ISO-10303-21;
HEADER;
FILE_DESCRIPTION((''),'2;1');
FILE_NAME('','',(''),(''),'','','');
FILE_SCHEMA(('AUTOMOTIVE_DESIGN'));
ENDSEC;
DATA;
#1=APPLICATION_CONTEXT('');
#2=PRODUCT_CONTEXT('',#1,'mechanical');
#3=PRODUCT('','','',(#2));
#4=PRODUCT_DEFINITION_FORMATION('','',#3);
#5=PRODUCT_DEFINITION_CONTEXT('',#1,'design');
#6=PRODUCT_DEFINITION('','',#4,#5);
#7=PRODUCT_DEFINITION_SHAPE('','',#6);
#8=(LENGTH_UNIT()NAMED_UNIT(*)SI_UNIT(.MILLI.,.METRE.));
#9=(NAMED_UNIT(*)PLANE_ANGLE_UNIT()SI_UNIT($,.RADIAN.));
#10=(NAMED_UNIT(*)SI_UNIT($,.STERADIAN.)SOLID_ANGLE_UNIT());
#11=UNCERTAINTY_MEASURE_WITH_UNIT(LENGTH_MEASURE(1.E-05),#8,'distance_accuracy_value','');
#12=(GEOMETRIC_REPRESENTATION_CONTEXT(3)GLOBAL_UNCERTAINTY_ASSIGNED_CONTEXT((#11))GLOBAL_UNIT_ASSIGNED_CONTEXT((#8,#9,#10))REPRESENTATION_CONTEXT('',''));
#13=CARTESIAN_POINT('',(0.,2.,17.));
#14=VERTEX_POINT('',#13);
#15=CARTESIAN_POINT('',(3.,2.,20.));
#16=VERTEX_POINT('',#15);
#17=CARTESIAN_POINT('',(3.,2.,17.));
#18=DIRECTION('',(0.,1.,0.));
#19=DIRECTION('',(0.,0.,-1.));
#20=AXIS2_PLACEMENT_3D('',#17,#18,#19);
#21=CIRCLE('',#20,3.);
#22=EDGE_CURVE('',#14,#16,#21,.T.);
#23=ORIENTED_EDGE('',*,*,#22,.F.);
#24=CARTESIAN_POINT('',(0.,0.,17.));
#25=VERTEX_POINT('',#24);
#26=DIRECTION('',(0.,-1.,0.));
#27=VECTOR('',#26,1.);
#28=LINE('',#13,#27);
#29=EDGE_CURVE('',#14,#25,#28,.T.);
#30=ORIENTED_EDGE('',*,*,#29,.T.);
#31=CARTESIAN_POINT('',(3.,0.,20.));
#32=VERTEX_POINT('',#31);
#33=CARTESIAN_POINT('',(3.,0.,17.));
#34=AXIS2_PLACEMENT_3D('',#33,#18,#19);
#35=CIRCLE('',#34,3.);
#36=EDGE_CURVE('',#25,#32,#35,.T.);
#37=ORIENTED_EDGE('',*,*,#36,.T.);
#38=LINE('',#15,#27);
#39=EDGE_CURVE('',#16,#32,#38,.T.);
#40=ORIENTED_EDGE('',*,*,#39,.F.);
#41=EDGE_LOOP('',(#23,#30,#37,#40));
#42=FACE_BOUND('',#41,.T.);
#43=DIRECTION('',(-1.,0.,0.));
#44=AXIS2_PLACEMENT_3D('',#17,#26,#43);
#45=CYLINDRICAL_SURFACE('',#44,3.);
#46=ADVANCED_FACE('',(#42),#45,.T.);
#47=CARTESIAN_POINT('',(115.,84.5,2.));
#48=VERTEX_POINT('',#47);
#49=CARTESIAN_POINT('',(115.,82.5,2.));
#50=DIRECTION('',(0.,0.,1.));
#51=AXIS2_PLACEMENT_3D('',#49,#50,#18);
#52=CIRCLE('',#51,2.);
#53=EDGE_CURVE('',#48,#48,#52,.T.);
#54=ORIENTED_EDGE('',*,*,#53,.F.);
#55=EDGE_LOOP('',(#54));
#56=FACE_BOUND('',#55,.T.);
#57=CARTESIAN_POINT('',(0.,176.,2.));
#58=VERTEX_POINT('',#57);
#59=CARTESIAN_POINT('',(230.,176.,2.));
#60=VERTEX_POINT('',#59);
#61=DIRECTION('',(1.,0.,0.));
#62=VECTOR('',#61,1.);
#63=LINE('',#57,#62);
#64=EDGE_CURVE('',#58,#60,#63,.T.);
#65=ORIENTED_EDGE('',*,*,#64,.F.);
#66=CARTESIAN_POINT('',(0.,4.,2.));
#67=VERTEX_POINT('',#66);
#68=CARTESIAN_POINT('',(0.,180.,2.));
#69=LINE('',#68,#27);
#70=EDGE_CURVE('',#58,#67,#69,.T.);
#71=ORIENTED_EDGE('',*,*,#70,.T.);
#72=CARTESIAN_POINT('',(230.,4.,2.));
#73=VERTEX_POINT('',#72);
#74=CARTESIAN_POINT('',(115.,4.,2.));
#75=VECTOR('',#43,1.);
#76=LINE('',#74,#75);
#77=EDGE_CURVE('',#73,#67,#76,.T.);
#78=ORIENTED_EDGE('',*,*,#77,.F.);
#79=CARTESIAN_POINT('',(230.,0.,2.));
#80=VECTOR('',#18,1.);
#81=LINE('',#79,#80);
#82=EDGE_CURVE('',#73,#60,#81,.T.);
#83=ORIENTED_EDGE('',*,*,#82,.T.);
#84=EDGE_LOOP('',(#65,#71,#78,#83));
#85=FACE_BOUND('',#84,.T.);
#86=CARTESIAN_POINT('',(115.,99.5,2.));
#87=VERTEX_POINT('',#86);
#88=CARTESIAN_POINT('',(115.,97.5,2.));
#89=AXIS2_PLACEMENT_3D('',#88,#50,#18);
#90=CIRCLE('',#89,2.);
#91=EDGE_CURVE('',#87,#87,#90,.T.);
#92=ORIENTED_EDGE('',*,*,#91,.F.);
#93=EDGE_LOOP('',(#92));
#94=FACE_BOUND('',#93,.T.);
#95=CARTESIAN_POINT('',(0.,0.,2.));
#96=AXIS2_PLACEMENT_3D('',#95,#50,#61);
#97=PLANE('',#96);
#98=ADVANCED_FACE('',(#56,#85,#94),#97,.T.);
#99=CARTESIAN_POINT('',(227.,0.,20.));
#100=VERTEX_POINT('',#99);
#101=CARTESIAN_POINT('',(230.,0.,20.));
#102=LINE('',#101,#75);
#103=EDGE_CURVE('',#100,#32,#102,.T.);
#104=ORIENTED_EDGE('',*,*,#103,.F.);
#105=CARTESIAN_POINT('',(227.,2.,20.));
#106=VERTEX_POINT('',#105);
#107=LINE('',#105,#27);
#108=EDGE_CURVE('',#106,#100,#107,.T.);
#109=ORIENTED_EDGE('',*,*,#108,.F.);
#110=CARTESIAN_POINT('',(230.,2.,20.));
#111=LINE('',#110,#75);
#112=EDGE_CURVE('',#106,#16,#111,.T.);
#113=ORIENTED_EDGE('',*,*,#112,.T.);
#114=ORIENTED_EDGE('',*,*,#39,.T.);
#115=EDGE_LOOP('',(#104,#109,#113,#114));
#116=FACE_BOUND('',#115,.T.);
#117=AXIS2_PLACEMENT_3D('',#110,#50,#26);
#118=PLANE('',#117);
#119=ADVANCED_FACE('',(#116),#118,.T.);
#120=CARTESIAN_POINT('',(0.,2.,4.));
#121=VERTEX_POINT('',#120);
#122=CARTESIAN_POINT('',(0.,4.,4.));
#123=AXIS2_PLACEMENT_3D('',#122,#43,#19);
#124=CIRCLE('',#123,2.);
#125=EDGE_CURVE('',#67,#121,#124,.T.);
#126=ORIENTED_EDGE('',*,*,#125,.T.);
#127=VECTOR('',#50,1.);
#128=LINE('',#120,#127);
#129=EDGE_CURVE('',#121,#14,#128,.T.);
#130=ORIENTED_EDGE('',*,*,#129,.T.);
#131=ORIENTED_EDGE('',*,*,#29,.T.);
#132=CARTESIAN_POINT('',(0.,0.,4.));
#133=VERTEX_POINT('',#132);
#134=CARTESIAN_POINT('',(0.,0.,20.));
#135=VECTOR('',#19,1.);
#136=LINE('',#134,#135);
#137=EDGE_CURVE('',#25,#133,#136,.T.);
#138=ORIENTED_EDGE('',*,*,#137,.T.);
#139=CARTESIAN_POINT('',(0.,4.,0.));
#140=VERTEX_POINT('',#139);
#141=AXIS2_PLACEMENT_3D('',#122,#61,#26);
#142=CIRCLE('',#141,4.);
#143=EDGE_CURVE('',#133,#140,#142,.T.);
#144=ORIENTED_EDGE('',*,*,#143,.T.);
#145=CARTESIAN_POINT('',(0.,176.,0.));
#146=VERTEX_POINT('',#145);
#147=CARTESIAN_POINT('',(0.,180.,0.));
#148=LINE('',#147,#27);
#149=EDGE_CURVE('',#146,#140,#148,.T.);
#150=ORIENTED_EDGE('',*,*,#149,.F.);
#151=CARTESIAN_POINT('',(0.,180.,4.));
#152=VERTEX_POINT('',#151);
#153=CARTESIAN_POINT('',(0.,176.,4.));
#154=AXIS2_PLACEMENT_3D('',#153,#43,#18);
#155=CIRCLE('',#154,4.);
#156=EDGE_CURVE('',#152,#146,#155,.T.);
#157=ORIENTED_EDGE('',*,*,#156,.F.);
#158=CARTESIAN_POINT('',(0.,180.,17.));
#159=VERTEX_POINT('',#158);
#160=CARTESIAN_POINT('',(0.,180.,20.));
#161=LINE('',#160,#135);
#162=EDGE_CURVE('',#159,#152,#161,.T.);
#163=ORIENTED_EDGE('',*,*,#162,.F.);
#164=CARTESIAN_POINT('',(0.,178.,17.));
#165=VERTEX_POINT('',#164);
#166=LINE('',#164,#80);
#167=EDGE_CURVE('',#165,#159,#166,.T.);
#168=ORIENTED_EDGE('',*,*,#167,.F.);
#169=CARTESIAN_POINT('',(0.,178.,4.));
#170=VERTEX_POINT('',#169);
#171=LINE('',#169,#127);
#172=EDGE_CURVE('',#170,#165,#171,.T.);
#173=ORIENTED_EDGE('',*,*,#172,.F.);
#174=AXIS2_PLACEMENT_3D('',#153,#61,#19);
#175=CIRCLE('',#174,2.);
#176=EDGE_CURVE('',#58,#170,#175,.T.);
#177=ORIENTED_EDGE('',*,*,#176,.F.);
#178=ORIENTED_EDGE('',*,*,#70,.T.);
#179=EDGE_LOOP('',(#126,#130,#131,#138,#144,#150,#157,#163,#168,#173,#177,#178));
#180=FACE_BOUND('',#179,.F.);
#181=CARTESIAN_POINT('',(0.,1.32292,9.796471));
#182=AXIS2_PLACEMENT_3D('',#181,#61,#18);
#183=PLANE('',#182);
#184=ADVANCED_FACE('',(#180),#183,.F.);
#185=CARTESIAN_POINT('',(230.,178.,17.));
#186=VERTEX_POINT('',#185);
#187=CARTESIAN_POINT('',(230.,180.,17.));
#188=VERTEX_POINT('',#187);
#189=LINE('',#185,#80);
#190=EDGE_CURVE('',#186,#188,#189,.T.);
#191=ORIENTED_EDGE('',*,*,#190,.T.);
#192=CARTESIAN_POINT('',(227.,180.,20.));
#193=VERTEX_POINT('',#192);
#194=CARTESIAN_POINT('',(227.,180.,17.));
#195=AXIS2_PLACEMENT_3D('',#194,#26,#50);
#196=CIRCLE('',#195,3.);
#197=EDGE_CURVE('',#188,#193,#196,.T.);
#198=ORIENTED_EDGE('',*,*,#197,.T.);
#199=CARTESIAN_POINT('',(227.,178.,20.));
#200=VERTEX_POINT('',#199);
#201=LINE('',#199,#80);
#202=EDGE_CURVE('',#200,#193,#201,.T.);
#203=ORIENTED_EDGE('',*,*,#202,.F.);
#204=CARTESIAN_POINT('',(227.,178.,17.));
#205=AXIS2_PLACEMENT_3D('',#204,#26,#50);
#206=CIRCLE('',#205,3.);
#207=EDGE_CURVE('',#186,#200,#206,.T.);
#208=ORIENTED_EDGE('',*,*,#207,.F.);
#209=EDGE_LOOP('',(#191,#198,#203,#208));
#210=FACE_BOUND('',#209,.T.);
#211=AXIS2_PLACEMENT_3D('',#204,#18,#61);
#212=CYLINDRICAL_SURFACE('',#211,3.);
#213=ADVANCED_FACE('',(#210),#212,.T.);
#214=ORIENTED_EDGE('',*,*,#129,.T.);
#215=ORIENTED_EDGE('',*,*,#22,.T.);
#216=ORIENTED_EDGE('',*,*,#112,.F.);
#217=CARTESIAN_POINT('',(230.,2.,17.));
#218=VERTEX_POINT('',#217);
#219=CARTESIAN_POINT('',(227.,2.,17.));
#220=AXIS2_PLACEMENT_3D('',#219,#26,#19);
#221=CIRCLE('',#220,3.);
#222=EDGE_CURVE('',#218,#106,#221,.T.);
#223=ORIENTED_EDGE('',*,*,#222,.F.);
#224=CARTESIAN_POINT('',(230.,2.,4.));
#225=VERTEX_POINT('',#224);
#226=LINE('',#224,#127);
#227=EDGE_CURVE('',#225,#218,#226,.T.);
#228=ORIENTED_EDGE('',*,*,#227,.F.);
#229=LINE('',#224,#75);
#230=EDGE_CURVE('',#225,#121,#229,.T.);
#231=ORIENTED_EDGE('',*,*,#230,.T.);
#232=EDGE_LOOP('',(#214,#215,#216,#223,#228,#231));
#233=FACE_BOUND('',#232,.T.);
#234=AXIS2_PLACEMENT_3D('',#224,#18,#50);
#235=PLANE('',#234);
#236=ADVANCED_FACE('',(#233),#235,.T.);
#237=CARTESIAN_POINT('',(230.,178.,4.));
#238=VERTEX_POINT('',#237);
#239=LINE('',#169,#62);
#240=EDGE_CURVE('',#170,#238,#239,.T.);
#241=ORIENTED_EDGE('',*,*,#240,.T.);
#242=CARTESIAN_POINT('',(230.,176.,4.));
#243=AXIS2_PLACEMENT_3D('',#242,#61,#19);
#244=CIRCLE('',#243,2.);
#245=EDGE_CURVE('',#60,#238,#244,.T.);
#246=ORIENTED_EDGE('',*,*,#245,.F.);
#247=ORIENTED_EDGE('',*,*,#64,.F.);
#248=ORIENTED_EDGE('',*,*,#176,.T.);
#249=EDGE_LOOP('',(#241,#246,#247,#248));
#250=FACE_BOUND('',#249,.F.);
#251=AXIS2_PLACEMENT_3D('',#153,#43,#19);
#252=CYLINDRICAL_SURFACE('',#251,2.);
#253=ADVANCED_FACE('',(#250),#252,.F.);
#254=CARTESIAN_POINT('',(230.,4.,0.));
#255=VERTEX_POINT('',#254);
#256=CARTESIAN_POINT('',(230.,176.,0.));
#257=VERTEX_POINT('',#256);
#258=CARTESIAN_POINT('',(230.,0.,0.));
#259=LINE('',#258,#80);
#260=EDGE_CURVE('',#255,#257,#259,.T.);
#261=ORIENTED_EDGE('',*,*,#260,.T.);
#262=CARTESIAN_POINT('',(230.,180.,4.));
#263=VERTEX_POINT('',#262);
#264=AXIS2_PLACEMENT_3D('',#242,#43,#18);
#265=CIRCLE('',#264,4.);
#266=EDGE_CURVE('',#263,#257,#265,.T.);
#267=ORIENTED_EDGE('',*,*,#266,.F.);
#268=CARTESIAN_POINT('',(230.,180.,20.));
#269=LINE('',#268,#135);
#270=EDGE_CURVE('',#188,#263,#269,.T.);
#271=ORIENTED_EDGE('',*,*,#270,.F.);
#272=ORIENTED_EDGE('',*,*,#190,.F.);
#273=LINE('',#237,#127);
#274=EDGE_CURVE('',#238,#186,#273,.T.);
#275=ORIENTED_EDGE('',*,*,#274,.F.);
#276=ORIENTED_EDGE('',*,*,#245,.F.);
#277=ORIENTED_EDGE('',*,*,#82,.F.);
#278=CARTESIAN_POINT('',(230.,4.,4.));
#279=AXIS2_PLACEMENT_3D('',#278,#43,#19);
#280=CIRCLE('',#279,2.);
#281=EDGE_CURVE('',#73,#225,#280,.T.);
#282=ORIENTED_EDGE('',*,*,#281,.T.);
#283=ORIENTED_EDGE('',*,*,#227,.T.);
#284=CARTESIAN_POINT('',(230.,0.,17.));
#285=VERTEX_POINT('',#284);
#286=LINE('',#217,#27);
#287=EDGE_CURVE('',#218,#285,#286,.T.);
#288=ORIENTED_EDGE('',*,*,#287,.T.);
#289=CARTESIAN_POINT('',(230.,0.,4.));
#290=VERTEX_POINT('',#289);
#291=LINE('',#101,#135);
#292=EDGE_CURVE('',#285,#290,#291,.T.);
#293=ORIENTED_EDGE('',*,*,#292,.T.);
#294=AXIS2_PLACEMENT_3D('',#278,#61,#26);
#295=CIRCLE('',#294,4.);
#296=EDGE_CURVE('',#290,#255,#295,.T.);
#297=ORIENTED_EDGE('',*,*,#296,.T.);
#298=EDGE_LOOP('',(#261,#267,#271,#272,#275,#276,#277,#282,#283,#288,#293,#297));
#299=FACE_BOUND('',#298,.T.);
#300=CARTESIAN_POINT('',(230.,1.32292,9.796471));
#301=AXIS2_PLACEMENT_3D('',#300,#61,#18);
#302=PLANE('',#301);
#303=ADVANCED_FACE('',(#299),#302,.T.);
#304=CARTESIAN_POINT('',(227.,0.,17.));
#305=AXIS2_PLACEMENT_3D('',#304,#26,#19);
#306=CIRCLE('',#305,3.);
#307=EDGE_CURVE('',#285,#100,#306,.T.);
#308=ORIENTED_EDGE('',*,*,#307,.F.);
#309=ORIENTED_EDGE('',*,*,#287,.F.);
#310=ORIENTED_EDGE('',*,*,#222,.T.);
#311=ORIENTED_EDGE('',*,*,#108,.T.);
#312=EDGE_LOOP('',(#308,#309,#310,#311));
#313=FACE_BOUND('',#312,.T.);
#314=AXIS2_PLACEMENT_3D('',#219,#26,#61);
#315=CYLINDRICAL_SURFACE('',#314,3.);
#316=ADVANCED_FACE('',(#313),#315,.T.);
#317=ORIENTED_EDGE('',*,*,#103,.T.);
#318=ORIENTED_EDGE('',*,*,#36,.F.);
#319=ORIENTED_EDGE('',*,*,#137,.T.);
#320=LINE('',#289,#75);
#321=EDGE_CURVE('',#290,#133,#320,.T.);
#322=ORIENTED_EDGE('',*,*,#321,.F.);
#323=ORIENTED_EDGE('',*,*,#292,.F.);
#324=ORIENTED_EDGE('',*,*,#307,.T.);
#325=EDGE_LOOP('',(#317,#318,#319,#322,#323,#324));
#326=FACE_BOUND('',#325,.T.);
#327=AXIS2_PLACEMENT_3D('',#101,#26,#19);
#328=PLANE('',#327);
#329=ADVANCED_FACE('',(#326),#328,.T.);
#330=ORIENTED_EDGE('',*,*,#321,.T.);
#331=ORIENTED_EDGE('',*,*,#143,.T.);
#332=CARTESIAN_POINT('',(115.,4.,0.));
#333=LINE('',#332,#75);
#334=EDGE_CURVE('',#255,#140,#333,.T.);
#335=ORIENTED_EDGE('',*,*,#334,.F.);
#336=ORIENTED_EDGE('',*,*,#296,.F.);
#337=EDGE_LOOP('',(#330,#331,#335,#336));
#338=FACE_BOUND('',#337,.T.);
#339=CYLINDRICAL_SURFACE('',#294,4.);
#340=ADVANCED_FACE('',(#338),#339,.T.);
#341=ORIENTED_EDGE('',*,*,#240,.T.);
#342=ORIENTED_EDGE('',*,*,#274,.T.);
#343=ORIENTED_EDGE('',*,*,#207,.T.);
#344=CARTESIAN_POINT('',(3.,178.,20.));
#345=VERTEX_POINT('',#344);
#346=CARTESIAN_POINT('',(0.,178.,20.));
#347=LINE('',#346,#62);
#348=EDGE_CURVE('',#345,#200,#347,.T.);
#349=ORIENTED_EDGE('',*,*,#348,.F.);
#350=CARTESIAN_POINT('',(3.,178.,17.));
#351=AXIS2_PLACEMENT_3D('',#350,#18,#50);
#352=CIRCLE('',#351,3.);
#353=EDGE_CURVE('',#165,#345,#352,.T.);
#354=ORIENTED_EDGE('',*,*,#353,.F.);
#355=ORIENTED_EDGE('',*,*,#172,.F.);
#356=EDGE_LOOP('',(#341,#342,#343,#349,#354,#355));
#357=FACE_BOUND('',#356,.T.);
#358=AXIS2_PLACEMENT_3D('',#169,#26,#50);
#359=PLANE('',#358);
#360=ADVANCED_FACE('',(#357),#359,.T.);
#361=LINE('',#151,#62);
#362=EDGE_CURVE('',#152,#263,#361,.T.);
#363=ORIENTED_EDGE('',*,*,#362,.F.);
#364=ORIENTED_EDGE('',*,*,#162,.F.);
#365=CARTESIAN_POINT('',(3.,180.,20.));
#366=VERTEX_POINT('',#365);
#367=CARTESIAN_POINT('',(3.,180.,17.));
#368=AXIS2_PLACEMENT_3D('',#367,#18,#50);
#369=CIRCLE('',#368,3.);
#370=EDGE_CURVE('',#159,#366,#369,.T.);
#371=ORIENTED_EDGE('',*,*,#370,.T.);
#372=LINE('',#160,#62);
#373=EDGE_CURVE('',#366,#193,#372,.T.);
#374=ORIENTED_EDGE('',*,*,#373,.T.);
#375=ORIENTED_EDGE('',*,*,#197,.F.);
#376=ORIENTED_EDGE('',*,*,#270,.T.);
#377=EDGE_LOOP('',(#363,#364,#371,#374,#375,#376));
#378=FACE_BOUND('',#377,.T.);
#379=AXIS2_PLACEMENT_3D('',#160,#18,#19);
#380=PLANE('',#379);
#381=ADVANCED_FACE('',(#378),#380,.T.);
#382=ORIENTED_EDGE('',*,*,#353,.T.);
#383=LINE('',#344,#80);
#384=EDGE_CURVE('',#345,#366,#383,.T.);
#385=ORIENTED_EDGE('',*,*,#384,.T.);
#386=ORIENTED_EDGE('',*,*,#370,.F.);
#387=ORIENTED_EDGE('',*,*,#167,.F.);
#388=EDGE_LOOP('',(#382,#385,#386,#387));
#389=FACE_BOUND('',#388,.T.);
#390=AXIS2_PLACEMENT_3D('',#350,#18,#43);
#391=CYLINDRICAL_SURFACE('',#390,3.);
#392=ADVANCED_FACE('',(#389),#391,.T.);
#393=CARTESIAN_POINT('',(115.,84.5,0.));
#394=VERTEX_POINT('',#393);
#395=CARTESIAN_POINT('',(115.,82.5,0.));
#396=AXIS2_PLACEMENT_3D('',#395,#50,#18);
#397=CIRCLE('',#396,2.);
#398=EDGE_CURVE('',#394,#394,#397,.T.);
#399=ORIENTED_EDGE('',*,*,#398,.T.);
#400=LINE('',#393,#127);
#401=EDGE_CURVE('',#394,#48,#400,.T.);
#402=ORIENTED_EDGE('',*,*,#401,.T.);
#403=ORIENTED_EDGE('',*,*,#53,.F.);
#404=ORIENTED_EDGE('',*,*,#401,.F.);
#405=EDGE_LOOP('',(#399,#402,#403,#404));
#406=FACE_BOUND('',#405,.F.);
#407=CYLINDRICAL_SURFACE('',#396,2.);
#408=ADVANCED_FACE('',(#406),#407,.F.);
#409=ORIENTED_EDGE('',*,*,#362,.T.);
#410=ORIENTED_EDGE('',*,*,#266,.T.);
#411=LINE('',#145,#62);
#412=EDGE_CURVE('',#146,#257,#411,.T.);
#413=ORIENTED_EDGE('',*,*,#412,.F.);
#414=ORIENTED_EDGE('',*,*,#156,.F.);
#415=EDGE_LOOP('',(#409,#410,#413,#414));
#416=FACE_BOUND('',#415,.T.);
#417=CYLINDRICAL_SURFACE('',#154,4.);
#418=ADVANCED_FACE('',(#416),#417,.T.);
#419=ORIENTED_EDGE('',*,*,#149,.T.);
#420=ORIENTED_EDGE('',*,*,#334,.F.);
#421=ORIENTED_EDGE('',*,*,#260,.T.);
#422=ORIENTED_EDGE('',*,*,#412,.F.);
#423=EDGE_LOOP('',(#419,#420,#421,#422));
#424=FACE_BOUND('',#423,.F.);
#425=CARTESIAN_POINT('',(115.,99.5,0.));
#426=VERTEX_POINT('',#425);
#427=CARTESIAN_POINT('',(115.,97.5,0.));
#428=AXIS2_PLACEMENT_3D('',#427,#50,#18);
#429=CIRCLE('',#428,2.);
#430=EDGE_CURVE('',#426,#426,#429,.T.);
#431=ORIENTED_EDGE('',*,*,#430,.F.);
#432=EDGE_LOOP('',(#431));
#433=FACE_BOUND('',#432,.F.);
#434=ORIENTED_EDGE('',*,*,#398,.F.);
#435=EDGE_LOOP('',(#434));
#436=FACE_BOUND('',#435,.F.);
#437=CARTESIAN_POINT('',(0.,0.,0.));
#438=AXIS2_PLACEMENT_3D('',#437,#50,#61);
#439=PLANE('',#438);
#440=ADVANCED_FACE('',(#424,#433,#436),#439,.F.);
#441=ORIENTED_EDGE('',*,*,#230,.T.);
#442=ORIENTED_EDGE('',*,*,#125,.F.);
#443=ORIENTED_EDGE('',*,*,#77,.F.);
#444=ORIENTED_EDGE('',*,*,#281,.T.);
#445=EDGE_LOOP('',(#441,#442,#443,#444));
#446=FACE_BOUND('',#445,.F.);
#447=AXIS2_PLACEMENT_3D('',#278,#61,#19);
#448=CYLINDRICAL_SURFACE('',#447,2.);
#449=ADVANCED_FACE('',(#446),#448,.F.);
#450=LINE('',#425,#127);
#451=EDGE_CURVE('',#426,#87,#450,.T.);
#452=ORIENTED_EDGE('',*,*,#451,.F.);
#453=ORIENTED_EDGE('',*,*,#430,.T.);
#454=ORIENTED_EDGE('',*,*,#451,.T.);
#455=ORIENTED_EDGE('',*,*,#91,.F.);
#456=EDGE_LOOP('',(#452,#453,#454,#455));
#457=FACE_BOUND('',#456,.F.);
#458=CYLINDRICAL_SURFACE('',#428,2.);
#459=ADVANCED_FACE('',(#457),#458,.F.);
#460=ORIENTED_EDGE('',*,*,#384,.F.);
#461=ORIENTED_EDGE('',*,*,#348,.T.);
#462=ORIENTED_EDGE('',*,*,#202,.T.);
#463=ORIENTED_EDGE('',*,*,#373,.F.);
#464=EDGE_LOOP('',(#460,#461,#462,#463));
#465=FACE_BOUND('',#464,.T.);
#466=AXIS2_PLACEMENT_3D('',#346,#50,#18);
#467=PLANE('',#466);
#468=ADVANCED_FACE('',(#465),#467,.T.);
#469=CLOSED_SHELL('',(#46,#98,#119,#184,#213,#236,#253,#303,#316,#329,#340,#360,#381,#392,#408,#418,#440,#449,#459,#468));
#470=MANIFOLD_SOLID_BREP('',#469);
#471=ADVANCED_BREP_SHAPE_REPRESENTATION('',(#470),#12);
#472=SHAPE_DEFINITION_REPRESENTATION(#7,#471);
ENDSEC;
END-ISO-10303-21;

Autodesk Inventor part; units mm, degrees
ref_plane "YZ Plane" through (0, 0, 0) normal (1, 0, 0) x (0, 1, 0)
ref_plane "XZ Plane" through (0, 0, 0) normal (0, 1, 0) x (-1, 0, 0)
ref_plane "XY Plane" through (0, 0, 0) normal (0, 0, 1) x (1, 0, 0)
sketch "Skizze1" plane through (0, 0, 0) normal (0, 0, 1) x (1, 0, 0)
  line L0 (0, 0) -> (230, 0)
  line L1 (230, 0) -> (230, 180)
  line L2 (230, 180) -> (0, 180)
  line L3 (0, 180) -> (0, 0)
  dimension "d0" = 230
  dimension "d1" = 180
extrude "Grobblech1" add sketch "Skizze1" along normal blind 2
sketch "Skizze2" plane through (230, 2, 0) normal (0, -1, 0) x (1, 0, 0)
  line L0 (-230, 0) -> (0, 0)
  line L1 (0, 0) -> (0, 20)
  line L2 (0, 20) -> (-230, 20)
  line L3 (-230, 20) -> (-230, 0)
edge flange "Lasche1" height 20 angle 90 thickness 2 bend radius 2 thickness toward (0, -1, 0) relief tear relief width 2 relief depth 1 corner gap 2 corner form 0 edges at (115, 0, 2) (115, 180, 2) wall of the first edge with corners at (0, 2, 0) (230, 2, 0) (230, 2, 20) (0, 2, 20)
bend "Biegung1"
corner "Ecke1"
sketch "Skizze3" plane through (0, 0, 0) normal (0, 0, -1) x (-1, 0, 0)
  circle A0 centre (-36.5, 97.5) radius 1.621 projected
  circle A1 centre (-36.5, 82.5) radius 1.621 projected
  circle A2 centre (-193.5, 97.5) radius 1.621 projected
  circle A3 centre (-193.5, 82.5) radius 1.621 projected
  line L0 (0, 0) -> (-36.5, 0)
  line L1 (-36.5, 0) -> (-36.5, 82.5)
  line L2 (-36.5, 82.5) -> (0, 82.5)
  line L3 (0, 82.5) -> (0, 0)
  line L4 (-36.5, 82.5) -> (-193.5, 82.5)
  line L5 (-193.5, 82.5) -> (-193.5, 97.5)
  line L6 (-193.5, 97.5) -> (-36.5, 97.5)
  line L7 (-36.5, 97.5) -> (-36.5, 82.5)
  circle A4 centre (-115, 97.5) radius 1.621 projected
  circle A5 centre (-115, 82.5) radius 1.621 projected
hole "Bohrung1" at (115, 97.5, 0) at (115, 82.5, 0) direction (0, 0, 1) diameter 4 depth 2 tip angle 118
fillet "Eckenrundung1" radius 3 4 edges at (230, 1, 20) (230, 179, 20) (0, 179, 20) (0, 1, 20)
equation "\"d19\" = Stärke"
equation "\"d2\" = Stärke"
equation "\"d3\" = BreiteBiegungsfreistellung"
equation "\"d4\" = TiefeBiegungsfreistellung"
equation "\"d5\" = MinimalRest"
equation "\"d6\" = Übergangsradius"
equation "\"d9\" = Biegeradius"
equation "\"d10\" = GrößeEckenfreistellung"
equation "\"d11\" = Abstandsgröße"
equation "\"d12\" = JacobiRadiusGröße"
equation "\"Biegeradius\" = Stärke"
equation "\"BreiteBiegungsfreistellung\" = Stärke"
equation "\"TiefeBiegungsfreistellung\" = 0.5 * Stärke"
equation "\"GrößeEckenfreistellung\" = 4 * Stärke"
equation "\"MinimalRest\" = 2 * Stärke"
equation "\"Übergangsradius\" = Biegeradius"
equation "\"JacobiRadiusGröße\" = Biegeradius"
equation "\"Abstandsgröße\" = Stärke"
equation "\"Stärke\" = 2"
properties part number "Schale"
